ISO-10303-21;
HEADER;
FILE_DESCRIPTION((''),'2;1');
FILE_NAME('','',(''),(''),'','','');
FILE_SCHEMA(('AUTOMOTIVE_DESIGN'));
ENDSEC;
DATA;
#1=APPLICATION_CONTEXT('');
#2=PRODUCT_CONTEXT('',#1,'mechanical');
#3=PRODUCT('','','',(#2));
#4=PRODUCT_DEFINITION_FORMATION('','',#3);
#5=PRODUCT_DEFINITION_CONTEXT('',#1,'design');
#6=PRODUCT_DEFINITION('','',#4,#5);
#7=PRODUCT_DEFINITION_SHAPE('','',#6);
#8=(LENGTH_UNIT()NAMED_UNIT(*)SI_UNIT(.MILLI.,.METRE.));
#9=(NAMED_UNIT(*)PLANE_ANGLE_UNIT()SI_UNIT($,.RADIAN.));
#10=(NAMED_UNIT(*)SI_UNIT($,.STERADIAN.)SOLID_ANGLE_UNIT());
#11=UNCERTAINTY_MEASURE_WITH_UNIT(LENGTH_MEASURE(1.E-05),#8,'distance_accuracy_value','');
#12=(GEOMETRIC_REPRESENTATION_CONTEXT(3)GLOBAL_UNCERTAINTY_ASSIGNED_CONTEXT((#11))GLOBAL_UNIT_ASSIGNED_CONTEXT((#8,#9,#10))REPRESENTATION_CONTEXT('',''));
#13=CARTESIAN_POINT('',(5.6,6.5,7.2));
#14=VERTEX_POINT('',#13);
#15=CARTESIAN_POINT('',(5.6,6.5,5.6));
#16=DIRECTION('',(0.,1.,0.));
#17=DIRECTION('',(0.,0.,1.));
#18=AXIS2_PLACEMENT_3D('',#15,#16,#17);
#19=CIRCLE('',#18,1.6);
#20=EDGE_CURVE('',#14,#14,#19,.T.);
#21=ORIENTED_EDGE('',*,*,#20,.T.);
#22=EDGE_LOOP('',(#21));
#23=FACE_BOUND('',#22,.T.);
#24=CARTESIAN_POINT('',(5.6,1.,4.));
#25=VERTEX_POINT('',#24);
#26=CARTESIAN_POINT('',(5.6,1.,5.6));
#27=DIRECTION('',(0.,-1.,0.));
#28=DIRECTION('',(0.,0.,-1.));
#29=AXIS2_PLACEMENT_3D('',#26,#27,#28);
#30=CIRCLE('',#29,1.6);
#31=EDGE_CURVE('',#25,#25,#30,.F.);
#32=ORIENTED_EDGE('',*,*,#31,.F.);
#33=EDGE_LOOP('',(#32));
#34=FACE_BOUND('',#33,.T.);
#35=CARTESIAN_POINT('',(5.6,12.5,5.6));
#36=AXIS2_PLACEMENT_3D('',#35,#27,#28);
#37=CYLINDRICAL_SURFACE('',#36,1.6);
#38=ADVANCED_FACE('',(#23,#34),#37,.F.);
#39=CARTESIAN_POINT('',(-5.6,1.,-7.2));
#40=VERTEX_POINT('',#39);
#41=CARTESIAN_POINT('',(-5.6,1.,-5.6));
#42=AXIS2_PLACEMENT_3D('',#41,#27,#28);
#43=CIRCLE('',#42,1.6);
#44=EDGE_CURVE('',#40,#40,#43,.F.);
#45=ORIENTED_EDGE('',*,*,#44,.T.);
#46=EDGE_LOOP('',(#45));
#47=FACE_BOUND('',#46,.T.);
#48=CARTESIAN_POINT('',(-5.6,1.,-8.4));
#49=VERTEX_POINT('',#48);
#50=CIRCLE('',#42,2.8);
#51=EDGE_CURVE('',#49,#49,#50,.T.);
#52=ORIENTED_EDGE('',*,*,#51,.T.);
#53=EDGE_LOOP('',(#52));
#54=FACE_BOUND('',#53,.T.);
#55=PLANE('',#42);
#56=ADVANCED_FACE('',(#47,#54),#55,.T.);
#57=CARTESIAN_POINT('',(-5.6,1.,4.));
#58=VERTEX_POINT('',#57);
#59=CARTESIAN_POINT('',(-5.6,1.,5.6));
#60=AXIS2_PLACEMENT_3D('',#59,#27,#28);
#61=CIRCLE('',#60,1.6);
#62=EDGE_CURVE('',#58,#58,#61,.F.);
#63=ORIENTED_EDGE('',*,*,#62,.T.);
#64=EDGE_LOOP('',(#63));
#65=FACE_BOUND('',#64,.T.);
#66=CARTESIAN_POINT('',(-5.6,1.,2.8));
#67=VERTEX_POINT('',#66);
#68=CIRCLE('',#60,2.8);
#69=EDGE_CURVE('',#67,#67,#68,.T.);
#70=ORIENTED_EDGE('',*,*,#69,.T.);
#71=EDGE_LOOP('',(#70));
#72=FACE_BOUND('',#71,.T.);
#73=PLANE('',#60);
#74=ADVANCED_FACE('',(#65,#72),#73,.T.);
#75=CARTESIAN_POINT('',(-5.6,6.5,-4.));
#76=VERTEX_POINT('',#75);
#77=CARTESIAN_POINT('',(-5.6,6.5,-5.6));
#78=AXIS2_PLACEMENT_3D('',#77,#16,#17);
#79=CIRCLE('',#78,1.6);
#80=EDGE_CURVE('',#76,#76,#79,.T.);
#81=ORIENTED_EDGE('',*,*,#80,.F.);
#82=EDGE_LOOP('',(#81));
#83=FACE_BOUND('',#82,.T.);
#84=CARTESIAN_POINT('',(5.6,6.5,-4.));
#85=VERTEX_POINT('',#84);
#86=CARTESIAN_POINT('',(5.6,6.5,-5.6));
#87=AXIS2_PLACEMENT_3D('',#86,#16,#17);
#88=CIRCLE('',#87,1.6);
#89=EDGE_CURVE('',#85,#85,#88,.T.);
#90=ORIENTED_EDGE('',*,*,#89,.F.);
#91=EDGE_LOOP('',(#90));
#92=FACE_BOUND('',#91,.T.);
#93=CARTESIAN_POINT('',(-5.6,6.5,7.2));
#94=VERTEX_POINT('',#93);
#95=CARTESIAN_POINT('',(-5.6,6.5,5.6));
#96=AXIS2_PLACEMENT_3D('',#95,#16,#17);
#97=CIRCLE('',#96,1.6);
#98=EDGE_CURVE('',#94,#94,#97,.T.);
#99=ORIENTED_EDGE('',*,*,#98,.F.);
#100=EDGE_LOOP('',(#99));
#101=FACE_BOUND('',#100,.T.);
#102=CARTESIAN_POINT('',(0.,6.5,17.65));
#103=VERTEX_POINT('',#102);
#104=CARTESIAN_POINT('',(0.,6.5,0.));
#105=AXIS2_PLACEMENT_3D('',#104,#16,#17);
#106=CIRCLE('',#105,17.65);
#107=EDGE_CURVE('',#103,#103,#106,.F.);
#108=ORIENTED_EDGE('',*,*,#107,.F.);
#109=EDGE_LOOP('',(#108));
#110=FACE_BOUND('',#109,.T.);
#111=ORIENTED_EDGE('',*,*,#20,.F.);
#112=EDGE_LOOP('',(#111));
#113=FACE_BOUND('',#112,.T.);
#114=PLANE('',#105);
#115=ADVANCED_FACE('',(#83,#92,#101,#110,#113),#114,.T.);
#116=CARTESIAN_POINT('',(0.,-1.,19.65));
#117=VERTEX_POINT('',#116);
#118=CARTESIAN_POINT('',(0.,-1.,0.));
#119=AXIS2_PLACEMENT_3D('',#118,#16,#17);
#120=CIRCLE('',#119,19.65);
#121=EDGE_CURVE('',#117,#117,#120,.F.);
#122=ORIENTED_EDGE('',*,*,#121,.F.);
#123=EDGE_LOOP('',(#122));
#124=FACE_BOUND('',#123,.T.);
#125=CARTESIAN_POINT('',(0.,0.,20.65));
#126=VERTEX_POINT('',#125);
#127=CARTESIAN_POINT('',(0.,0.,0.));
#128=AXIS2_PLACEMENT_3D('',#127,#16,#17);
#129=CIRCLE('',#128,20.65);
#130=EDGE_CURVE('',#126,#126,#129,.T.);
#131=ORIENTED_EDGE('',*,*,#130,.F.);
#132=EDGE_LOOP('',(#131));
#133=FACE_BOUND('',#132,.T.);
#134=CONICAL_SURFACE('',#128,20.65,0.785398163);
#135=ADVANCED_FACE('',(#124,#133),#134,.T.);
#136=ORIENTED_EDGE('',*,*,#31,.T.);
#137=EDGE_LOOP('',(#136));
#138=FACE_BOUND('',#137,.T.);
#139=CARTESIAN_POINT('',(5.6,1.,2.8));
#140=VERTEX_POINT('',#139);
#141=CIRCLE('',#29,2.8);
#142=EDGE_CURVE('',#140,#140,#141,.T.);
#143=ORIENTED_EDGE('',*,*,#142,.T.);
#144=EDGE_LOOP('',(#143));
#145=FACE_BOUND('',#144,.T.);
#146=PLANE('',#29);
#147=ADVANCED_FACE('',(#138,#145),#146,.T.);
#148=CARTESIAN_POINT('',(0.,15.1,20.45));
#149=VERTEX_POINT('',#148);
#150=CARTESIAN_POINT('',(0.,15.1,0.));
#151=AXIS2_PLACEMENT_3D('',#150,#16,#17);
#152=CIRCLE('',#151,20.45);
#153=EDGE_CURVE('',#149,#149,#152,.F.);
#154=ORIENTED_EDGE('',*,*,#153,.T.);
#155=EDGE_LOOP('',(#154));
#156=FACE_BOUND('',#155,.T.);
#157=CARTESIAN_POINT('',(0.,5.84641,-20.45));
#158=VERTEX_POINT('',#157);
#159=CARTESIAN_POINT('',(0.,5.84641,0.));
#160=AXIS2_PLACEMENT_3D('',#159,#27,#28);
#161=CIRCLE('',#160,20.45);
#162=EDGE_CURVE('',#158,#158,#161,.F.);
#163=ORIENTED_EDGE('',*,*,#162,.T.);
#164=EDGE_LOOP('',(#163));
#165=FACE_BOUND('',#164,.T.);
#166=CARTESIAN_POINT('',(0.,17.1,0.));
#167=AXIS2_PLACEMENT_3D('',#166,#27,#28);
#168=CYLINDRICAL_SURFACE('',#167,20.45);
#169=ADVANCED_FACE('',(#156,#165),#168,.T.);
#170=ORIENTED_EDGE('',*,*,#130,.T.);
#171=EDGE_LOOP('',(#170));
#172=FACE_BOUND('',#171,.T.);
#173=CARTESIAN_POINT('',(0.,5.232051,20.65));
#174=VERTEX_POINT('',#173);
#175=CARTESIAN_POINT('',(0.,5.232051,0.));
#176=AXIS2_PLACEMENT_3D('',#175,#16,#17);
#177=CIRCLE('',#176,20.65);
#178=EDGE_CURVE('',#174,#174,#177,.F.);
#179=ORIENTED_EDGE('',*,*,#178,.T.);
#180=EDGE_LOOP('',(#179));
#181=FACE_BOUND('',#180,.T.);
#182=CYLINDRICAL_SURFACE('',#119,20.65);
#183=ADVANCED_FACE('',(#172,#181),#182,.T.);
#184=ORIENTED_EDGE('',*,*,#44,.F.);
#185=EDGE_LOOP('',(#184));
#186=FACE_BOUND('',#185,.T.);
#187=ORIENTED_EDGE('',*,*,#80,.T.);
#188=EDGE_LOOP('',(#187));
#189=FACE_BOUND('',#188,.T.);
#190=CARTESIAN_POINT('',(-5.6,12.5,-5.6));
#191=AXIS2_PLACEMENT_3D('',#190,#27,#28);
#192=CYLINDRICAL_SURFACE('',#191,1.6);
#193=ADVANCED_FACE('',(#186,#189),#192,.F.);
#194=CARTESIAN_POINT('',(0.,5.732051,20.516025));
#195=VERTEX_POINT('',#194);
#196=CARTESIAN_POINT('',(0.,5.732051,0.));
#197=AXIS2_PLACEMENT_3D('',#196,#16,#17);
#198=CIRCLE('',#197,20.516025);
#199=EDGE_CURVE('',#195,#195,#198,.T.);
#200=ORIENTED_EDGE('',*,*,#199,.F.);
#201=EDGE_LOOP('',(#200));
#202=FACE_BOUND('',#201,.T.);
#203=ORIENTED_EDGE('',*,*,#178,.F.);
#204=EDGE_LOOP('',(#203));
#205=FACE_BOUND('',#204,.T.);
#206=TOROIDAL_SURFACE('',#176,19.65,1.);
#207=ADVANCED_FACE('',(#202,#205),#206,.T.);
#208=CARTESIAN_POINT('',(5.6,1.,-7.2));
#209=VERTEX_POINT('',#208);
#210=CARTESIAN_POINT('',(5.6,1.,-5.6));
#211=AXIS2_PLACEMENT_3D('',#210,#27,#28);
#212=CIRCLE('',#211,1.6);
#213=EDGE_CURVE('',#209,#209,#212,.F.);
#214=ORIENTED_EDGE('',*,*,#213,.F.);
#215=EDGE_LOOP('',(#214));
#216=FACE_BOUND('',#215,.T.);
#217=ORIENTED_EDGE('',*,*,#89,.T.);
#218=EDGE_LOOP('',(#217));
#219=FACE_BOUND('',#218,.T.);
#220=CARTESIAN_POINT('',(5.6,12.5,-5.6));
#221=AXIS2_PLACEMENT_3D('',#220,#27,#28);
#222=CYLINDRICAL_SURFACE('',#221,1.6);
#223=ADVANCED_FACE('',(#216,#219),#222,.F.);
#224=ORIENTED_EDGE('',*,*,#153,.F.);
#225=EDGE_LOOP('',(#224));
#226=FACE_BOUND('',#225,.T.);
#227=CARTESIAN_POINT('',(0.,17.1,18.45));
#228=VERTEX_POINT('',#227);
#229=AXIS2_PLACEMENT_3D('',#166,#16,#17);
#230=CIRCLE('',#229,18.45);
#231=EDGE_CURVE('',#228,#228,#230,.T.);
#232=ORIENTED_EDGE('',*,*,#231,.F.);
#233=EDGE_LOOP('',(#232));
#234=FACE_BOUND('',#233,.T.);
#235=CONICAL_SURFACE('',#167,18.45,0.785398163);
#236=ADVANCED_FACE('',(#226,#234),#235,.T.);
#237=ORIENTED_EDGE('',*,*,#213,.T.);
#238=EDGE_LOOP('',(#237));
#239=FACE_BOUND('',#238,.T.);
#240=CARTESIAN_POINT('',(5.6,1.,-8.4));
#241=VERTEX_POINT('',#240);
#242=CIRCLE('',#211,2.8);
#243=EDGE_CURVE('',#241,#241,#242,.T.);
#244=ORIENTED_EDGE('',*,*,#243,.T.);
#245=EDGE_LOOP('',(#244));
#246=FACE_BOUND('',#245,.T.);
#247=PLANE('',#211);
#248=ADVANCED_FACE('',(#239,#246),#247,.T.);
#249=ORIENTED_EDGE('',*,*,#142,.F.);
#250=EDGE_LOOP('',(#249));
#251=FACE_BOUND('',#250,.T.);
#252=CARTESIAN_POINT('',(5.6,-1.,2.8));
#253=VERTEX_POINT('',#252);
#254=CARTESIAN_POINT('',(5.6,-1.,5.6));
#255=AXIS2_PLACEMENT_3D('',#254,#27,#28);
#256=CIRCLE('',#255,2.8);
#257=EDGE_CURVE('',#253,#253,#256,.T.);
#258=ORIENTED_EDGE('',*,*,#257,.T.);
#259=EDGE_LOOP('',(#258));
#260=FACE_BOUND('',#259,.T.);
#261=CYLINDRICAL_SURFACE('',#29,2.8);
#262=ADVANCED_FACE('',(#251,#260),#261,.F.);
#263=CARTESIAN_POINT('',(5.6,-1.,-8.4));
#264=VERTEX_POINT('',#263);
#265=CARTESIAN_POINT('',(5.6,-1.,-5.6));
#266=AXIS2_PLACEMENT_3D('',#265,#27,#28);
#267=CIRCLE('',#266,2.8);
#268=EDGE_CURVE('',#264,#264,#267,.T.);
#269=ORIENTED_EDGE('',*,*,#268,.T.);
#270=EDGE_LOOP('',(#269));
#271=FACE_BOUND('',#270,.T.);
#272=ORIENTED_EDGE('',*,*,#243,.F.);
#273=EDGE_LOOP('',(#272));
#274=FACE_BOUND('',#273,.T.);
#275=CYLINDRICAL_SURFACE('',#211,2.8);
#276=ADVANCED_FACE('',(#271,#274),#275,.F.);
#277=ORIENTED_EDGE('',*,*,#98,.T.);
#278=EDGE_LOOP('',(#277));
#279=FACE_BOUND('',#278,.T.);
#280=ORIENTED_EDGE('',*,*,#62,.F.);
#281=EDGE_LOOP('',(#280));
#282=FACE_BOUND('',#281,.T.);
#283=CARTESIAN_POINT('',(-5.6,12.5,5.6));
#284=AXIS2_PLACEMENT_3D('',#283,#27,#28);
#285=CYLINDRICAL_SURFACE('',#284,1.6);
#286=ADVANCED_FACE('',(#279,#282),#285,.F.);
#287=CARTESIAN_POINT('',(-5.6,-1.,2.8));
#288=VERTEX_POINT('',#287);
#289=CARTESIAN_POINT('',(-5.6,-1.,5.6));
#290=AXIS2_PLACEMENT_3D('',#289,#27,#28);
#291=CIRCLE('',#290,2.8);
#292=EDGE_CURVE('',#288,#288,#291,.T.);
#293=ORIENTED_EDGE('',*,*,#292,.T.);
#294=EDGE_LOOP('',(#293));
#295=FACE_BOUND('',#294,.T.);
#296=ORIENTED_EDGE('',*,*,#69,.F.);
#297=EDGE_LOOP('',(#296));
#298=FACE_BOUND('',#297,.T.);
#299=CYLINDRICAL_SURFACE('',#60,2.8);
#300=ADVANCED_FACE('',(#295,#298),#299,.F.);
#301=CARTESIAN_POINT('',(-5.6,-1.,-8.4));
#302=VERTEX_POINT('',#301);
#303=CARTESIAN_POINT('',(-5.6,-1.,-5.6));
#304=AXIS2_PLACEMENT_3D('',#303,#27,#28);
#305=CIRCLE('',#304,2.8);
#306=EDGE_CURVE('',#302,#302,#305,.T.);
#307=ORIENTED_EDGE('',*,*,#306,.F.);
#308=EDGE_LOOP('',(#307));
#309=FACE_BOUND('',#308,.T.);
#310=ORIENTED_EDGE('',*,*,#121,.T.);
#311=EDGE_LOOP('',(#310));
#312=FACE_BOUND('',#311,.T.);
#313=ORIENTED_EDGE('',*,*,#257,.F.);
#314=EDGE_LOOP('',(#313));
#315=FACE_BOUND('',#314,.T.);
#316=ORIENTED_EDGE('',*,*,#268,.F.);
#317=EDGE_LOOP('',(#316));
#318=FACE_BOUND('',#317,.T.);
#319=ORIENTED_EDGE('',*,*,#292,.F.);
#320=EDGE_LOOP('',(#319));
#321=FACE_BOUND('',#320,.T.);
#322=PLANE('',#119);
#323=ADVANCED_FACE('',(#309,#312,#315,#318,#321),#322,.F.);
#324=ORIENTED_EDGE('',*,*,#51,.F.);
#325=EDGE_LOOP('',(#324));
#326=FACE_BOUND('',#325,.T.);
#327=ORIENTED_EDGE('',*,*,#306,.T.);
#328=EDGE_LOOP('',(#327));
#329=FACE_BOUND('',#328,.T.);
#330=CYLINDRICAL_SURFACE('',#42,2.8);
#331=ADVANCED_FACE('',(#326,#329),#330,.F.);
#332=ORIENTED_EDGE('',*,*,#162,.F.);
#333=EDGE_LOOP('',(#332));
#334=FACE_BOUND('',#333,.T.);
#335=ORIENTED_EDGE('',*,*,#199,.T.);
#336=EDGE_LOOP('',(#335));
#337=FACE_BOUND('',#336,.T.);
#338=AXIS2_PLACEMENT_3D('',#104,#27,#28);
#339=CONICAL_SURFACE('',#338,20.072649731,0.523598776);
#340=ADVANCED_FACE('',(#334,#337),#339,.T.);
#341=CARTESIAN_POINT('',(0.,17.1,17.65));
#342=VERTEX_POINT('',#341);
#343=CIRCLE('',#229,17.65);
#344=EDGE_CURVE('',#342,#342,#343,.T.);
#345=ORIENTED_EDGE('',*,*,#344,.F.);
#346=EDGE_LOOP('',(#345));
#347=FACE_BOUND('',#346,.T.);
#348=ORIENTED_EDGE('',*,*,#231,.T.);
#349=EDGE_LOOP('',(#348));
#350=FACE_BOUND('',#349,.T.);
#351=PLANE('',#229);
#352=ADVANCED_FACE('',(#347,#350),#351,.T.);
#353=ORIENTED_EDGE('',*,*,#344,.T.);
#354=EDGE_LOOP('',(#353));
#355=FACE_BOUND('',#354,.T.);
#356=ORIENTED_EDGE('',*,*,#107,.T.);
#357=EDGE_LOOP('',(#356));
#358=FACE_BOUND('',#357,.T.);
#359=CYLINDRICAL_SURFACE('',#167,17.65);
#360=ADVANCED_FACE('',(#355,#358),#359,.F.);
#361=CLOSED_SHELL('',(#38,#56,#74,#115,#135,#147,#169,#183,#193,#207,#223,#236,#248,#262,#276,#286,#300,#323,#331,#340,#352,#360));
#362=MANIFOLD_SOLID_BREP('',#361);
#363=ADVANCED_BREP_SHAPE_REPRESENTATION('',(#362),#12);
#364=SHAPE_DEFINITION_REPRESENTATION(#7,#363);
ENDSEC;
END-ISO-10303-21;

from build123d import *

# Parameters (mm, degrees)
BOSS_EXTRUDE1_DEPTH      = 6.5
BOSS_EXTRUDE1_DEPTH_BACK = 1
SKETCH1_R                = 20.65
SKETCH2_R                = 20.45
SKETCH2_R_2              = 17.65
BOSS_EXTRUDE2_DEPTH      = 10.6
SKETCH4_R                = 1.6
CUT_EXTRUDE1_DEPTH       = 13.5
SKETCH8_R                = 2.8
CUT_EXTRUDE2_DEPTH       = 2
CHAMFER1_SIZE            = 1
CHAMFER3_SIZE            = 1
CHAMFER3_SIZE_2          = 0.577350269
FILLET1_R                = 1
CHAMFER4_SIZE            = 2


# Some blends are built 0.0001 mm under size
with BuildPart() as part:
    # Sketch1 → Boss-Extrude1 (new, two sides: drawn at the far end of the back side and taken through both)
    with BuildSketch(Plane(origin=(0, 0, 0), x_dir=(1, 0, 0), z_dir=(0, 1, 0)).offset(-BOSS_EXTRUDE1_DEPTH_BACK)):
        with Locations(Location((0, 0, 0), (0, 0, 270))):
            Circle(SKETCH1_R)
    extrude(amount=BOSS_EXTRUDE1_DEPTH + BOSS_EXTRUDE1_DEPTH_BACK)

    # Sketch2 → Boss-Extrude2 (add)
    with BuildSketch(Plane(origin=(0, 6.5, 0), x_dir=(1, 0, 0), z_dir=(0, 1, 0))):
        with Locations(Location((0, 0, 0), (0, 0, 270))):
            Circle(SKETCH2_R)
        with Locations(Location((0, 0, 0), (0, 0, 270))):
            Circle(SKETCH2_R_2, mode=Mode.SUBTRACT)
    extrude(amount=BOSS_EXTRUDE2_DEPTH)

    # Sketch4 → Cut-Extrude1 (cut)
    with BuildSketch(Plane.XZ.offset(1)):
        with Locations(Location((-5.6, 5.6, 0), (0, 0, 270))):
            Circle(SKETCH4_R)
        with Locations(Location((5.6, 5.6, 0), (0, 0, 270))):
            Circle(SKETCH4_R)
        with Locations(Location((5.6, -5.6, 0), (0, 0, 270))):
            Circle(SKETCH4_R)
        with Locations(Location((-5.6, -5.6, 0), (0, 0, 270))):
            Circle(SKETCH4_R)
    extrude(amount=-CUT_EXTRUDE1_DEPTH, mode=Mode.SUBTRACT)

    # Sketch8 → Cut-Extrude2 (cut)
    with BuildSketch(Plane.XZ.offset(1)):
        with Locations(Location((5.6, -5.6, 0), (0, 0, 270))):
            Circle(SKETCH8_R)
        with Locations(Location((-5.6, -5.6, 0), (0, 0, 270))):
            Circle(SKETCH8_R)
        with Locations(Location((-5.6, 5.6, 0), (0, 0, 270))):
            Circle(SKETCH8_R)
        with Locations(Location((5.6, 5.6, 0), (0, 0, 270))):
            Circle(SKETCH8_R)
    extrude(amount=-CUT_EXTRUDE2_DEPTH, mode=Mode.SUBTRACT)

    # Chamfer1
    chamfer1_edges = [part.edges().sort_by_distance(p)[0] for p in [
        (0, -1, -20.65),
    ]]
    chamfer(chamfer1_edges, length=CHAMFER1_SIZE - 0.0001)  # a hair under: the kernel refuses the full size

    # Chamfer3
    # the kernel refuses this chamfer: 1, 0.577350269 mm, written as the material it takes off along each edge
    with BuildSketch(Plane(origin=(0, 6.5, 0), x_dir=(0, 0, 1), z_dir=(-1, 0, 0))) as chamfer3_piece_1_section:
        Polygon((20.65, -CHAMFER3_SIZE), (20.65 - CHAMFER3_SIZE_2, 0), (20.65, 0), align=None)
    chamfer3_piece_1 = revolve(axis=Axis((0, 6.5, 0), (0, 1, 0)), mode=Mode.PRIVATE)
    chamfer3_piece_1 = chamfer3_piece_1 - Plane(origin=(0, 5.670486655, 0), x_dir=(0, 0, 1), z_dir=(0, -1, 0)) * Cylinder(20.45, 83, mode=Mode.PRIVATE)
    add(chamfer3_piece_1, mode=Mode.SUBTRACT)

    # Fillet1
    fillet1_edges = [part.edges().sort_by_distance(p)[0] for p in [
        (0, 5.5, -20.65),
    ]]
    fillet(fillet1_edges, radius=FILLET1_R)

    # Chamfer4
    chamfer4_edges = [part.edges().sort_by_distance(p)[0] for p in [
        (0, 17.1, -20.45),
    ]]
    chamfer(chamfer4_edges, length=CHAMFER4_SIZE)


solid = part.part
